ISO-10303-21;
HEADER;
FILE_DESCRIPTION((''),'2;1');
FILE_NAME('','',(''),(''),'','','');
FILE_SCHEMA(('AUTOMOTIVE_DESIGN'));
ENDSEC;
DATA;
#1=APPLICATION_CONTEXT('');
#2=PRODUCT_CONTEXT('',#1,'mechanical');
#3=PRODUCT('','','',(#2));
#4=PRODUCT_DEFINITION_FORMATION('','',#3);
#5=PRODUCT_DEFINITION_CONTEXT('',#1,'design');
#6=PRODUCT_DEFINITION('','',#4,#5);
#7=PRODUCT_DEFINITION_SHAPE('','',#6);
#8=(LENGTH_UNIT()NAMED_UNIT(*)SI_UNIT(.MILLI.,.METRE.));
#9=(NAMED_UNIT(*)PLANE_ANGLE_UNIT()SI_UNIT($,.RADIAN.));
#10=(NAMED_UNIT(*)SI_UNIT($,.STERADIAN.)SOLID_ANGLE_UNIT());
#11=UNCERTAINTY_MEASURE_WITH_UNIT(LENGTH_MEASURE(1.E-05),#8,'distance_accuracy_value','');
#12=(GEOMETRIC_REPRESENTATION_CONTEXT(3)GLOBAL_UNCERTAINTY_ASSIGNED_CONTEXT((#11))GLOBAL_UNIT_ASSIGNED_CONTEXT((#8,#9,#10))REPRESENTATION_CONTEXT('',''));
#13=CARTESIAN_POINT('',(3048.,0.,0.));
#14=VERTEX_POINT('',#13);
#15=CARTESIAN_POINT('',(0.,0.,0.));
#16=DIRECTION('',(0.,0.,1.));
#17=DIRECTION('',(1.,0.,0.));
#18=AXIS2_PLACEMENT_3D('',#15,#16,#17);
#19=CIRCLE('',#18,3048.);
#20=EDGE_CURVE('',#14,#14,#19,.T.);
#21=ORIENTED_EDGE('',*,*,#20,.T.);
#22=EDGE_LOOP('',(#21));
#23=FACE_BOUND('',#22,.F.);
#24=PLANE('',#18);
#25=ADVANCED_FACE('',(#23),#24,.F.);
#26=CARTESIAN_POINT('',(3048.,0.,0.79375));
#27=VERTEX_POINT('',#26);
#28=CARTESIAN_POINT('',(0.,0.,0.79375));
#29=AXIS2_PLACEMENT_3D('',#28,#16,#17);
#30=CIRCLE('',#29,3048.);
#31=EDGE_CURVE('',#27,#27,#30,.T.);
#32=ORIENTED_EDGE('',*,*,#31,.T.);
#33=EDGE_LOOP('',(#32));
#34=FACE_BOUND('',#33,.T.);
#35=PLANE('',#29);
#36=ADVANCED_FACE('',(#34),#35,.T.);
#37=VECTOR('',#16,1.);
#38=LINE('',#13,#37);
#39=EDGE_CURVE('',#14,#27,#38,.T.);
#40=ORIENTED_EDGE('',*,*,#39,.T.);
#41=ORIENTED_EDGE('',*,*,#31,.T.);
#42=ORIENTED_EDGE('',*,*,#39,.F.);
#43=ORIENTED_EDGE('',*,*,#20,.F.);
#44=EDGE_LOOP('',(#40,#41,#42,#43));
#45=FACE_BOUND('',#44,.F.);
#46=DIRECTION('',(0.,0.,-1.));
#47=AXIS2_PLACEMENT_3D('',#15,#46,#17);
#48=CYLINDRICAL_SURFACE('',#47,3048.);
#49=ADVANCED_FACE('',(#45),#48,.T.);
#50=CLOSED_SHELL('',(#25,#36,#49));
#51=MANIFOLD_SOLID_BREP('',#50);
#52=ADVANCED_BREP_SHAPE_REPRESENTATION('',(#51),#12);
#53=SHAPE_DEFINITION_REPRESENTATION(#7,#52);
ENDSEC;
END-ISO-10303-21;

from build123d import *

# Parameters (mm, degrees)
F0_R     = 3048
F1_DEPTH = 0.79375


# Not quite as in the source:
# - a length typed as a fraction of an inch, garbled in the dataset ("3 / 203.2 mm" for 3/8 in), is restored


with BuildPart() as f1:
    # F0 (on Top) → F1 (new body)
    with BuildSketch(Plane.XY):
        Circle(F0_R)
    extrude(amount=F1_DEPTH)


solid = f1.part
